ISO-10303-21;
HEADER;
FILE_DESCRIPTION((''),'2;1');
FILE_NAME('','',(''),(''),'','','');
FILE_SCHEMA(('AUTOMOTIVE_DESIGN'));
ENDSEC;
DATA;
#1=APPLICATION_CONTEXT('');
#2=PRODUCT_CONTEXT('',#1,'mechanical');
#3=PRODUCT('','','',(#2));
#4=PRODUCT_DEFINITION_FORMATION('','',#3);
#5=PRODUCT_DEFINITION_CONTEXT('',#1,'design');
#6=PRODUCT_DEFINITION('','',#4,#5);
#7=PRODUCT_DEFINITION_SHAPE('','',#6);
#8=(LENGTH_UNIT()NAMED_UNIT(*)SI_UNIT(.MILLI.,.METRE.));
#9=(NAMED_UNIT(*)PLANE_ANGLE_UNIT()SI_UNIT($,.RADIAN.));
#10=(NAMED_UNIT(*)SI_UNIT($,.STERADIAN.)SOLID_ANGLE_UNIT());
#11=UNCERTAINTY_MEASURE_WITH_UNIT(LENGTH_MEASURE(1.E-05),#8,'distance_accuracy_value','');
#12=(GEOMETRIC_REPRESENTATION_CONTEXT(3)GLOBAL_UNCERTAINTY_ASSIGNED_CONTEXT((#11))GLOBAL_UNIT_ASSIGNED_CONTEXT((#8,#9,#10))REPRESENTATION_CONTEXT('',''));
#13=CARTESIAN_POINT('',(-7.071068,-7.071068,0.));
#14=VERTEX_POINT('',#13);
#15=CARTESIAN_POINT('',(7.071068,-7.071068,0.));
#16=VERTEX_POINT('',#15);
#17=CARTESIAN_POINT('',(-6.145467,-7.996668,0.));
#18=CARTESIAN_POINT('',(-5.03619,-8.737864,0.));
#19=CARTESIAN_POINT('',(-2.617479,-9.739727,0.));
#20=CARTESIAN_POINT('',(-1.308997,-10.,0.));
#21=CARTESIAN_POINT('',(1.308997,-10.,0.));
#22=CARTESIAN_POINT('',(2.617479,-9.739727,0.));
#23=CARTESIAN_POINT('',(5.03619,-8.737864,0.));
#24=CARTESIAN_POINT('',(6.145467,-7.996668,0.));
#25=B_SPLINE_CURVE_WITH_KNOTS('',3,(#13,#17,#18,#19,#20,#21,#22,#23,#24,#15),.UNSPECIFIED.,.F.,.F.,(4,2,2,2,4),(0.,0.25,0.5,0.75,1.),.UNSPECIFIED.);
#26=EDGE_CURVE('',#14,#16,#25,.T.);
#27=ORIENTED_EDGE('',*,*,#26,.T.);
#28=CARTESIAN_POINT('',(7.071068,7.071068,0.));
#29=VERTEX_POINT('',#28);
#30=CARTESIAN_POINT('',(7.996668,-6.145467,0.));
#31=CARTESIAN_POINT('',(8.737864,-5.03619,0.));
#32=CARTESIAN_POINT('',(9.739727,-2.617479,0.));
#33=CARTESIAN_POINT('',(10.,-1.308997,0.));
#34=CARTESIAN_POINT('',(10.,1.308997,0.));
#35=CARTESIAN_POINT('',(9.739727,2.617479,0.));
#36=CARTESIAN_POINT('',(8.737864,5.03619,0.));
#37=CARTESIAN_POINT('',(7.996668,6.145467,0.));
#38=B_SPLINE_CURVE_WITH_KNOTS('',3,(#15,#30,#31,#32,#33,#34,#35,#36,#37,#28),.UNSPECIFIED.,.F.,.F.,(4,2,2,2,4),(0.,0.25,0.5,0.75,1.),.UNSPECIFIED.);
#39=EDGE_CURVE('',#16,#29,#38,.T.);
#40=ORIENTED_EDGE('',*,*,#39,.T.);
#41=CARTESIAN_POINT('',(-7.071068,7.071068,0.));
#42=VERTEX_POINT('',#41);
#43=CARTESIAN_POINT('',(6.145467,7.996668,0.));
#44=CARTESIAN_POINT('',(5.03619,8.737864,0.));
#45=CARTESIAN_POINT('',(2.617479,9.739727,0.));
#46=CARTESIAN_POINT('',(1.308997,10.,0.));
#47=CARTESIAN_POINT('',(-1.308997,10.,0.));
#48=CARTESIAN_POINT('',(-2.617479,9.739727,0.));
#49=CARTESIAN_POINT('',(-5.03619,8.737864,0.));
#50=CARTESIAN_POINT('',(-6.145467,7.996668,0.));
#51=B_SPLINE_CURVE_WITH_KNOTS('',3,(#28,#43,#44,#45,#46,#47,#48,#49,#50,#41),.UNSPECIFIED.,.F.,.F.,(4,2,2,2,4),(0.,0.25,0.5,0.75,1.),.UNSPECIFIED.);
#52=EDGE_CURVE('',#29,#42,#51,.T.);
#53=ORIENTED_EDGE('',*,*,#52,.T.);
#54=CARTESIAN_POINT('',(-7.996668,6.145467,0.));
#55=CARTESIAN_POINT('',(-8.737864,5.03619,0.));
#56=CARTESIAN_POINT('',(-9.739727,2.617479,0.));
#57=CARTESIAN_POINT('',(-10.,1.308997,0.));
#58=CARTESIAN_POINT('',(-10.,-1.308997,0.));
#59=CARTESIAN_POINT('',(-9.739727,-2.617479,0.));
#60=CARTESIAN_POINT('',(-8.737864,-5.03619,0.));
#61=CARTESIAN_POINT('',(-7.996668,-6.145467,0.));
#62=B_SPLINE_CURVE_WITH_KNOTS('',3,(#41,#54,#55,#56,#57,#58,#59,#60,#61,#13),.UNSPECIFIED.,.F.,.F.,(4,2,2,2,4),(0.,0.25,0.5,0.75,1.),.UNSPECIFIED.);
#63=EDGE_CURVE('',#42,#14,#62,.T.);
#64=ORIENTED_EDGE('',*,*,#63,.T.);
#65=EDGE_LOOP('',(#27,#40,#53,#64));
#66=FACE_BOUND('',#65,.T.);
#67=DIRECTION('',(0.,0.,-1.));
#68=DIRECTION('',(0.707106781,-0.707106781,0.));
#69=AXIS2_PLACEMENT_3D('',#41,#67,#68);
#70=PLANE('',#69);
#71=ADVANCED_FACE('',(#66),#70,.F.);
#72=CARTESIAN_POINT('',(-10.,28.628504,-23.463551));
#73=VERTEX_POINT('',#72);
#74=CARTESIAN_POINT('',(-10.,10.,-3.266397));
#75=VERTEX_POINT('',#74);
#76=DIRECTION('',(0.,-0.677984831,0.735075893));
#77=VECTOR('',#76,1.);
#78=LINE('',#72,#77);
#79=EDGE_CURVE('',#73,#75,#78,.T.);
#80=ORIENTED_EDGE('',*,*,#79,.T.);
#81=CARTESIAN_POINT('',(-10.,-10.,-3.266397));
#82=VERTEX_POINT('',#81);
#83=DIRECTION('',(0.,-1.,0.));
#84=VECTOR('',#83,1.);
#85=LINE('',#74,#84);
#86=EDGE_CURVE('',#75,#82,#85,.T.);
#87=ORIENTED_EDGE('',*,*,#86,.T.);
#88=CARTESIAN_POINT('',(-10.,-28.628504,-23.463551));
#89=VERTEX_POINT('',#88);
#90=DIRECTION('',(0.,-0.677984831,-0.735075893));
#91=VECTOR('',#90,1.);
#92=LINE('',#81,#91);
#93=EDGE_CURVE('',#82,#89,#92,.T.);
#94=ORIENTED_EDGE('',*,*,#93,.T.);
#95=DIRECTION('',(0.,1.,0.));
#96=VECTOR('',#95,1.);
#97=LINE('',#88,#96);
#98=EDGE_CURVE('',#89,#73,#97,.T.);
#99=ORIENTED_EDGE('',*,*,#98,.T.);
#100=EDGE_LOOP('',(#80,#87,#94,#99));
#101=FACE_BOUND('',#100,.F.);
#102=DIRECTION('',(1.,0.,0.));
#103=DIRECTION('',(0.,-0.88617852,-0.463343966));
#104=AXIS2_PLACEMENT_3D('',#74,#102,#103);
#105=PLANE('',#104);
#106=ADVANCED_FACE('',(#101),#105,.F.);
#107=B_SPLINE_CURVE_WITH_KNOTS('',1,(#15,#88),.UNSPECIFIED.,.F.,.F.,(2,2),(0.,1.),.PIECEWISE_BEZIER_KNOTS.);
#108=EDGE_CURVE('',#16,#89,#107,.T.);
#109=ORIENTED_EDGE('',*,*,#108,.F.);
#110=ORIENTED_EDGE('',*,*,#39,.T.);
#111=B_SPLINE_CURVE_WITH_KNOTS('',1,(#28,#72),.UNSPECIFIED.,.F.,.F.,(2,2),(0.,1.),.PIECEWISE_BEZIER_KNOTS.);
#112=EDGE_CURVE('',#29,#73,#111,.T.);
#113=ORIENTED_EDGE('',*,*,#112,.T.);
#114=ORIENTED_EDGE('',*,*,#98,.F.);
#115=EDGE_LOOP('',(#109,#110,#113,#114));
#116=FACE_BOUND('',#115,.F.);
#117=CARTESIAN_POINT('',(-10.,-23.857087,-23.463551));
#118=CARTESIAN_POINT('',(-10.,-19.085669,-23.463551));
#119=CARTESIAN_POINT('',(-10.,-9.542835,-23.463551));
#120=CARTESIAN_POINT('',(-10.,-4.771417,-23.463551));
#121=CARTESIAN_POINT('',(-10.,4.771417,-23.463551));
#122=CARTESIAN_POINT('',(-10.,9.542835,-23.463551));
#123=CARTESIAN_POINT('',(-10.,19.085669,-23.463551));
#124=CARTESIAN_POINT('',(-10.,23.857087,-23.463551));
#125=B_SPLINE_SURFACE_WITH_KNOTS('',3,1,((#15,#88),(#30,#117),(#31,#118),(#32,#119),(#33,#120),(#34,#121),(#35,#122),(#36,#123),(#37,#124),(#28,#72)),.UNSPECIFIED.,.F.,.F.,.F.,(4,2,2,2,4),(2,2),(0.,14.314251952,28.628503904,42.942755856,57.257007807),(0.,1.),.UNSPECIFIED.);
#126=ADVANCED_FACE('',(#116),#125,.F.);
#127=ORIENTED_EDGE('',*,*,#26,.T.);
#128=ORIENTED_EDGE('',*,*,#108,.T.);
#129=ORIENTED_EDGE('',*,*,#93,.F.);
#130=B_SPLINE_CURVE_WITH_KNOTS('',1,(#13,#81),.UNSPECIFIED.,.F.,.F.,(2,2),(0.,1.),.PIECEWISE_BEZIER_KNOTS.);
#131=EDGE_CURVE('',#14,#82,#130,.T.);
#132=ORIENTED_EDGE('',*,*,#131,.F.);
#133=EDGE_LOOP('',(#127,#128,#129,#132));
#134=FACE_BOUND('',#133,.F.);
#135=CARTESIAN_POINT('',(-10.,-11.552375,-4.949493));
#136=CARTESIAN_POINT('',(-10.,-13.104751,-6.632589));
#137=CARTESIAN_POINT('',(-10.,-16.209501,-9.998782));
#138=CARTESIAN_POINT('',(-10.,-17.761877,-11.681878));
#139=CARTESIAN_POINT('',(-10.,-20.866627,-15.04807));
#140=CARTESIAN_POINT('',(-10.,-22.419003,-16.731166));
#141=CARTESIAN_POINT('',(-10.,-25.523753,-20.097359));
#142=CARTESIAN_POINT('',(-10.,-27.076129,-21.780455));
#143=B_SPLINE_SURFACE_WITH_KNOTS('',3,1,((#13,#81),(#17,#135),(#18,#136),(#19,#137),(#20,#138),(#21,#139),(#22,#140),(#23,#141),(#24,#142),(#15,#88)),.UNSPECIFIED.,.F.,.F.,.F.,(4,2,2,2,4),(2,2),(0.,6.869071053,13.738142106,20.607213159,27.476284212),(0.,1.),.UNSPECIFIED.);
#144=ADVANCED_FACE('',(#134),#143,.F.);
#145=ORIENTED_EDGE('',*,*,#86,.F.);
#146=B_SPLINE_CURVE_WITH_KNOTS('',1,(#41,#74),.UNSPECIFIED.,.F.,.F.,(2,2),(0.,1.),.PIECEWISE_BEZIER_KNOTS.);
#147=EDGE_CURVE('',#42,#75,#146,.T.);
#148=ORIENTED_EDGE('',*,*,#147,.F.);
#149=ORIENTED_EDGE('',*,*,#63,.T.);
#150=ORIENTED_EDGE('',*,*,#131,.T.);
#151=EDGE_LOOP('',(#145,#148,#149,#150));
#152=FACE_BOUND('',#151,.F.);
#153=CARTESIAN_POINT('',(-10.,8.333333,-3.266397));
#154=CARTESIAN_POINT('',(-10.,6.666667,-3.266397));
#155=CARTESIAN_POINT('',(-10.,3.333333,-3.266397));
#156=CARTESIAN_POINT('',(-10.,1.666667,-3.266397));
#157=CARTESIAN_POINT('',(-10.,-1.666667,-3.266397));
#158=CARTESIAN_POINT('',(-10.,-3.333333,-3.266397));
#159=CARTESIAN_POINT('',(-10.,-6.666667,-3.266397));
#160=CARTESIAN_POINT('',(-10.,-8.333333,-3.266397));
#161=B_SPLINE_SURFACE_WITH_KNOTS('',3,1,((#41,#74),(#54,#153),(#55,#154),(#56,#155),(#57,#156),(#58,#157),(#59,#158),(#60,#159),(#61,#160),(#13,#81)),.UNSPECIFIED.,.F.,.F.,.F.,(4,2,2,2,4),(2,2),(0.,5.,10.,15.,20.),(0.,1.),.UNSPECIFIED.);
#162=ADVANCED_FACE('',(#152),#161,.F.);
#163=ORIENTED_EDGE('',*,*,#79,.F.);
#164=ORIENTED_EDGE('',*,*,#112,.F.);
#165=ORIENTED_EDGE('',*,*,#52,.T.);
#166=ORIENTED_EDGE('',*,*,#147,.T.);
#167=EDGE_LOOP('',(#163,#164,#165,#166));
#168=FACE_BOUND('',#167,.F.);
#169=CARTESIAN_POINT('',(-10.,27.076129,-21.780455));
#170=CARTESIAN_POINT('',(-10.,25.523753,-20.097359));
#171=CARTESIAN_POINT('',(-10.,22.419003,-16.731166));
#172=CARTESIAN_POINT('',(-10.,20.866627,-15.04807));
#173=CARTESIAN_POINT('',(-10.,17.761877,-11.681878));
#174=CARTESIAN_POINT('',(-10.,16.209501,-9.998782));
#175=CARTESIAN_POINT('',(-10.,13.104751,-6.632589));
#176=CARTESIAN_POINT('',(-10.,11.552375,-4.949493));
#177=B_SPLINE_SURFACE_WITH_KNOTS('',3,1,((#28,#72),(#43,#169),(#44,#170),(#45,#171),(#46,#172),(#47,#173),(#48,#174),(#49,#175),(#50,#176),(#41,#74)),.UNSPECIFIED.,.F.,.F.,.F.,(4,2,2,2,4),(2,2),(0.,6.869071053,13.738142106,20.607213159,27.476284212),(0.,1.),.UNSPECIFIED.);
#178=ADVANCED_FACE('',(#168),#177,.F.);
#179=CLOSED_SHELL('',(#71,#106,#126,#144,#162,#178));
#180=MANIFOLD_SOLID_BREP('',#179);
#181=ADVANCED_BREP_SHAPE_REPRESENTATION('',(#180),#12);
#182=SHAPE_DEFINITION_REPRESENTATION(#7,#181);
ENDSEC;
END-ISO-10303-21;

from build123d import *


# Not quite as in the source:
# - the arcs of a loft's sections are written as splines that run evenly, so that the points pair up as in the source's solid


with BuildPart() as f3:
    # F0 (on Top) → F3 section 0
    with BuildSketch(Plane.XY):
        with BuildLine():
            add(Edge.make_bspline(
                [(-7.0710678119, 7.0710678119), (-7.996668424, 6.1454671997), (-8.7378638835, 5.0361898037), (-9.7397267667, 2.6174788436), (-10, 1.308996939), (-10, -1.308996939), (-9.7397267667, -2.6174788436), (-8.7378638835, -5.0361898037), (-7.996668424, -6.1454671997), (-7.0710678119, -7.0710678119)],
                knots=[0, 0, 0, 0, 0.25, 0.25, 0.5, 0.5, 0.75, 0.75, 1, 1, 1, 1], degree=3))
            add(Edge.make_bspline(
                [(-7.0710678119, -7.0710678119), (-6.1454671997, -7.996668424), (-5.0361898037, -8.7378638835), (-2.6174788436, -9.7397267667), (-1.308996939, -10), (1.308996939, -10), (2.6174788436, -9.7397267667), (5.0361898037, -8.7378638835), (6.1454671997, -7.996668424), (7.0710678119, -7.0710678119)],
                knots=[0, 0, 0, 0, 0.25, 0.25, 0.5, 0.5, 0.75, 0.75, 1, 1, 1, 1], degree=3))
            add(Edge.make_bspline(
                [(7.0710678119, -7.0710678119), (7.996668424, -6.1454671997), (8.7378638835, -5.0361898037), (9.7397267667, -2.6174788436), (10, -1.308996939), (10, 1.308996939), (9.7397267667, 2.6174788436), (8.7378638835, 5.0361898037), (7.996668424, 6.1454671997), (7.0710678119, 7.0710678119)],
                knots=[0, 0, 0, 0, 0.25, 0.25, 0.5, 0.5, 0.75, 0.75, 1, 1, 1, 1], degree=3))
            add(Edge.make_bspline(
                [(7.0710678119, 7.0710678119), (6.1454671997, 7.996668424), (5.0361898037, 8.7378638835), (2.6174788436, 9.7397267667), (1.308996939, 10), (-1.308996939, 10), (-2.6174788436, 9.7397267667), (-5.0361898037, 8.7378638835), (-6.1454671997, 7.996668424), (-7.0710678119, 7.0710678119)],
                knots=[0, 0, 0, 0, 0.25, 0.25, 0.5, 0.5, 0.75, 0.75, 1, 1, 1, 1], degree=3))
        make_face()
    # F2 (on plane+point) → F3 section 1
    with BuildSketch(Plane.YZ.offset(-10)):
        Polygon((10, -3.2663967892), (-10, -3.2663967892), (-28.6285039037, -23.4635509551), (28.6285039037, -23.4635509551), align=None)
    loft(ruled=True)


solid = f3.part
